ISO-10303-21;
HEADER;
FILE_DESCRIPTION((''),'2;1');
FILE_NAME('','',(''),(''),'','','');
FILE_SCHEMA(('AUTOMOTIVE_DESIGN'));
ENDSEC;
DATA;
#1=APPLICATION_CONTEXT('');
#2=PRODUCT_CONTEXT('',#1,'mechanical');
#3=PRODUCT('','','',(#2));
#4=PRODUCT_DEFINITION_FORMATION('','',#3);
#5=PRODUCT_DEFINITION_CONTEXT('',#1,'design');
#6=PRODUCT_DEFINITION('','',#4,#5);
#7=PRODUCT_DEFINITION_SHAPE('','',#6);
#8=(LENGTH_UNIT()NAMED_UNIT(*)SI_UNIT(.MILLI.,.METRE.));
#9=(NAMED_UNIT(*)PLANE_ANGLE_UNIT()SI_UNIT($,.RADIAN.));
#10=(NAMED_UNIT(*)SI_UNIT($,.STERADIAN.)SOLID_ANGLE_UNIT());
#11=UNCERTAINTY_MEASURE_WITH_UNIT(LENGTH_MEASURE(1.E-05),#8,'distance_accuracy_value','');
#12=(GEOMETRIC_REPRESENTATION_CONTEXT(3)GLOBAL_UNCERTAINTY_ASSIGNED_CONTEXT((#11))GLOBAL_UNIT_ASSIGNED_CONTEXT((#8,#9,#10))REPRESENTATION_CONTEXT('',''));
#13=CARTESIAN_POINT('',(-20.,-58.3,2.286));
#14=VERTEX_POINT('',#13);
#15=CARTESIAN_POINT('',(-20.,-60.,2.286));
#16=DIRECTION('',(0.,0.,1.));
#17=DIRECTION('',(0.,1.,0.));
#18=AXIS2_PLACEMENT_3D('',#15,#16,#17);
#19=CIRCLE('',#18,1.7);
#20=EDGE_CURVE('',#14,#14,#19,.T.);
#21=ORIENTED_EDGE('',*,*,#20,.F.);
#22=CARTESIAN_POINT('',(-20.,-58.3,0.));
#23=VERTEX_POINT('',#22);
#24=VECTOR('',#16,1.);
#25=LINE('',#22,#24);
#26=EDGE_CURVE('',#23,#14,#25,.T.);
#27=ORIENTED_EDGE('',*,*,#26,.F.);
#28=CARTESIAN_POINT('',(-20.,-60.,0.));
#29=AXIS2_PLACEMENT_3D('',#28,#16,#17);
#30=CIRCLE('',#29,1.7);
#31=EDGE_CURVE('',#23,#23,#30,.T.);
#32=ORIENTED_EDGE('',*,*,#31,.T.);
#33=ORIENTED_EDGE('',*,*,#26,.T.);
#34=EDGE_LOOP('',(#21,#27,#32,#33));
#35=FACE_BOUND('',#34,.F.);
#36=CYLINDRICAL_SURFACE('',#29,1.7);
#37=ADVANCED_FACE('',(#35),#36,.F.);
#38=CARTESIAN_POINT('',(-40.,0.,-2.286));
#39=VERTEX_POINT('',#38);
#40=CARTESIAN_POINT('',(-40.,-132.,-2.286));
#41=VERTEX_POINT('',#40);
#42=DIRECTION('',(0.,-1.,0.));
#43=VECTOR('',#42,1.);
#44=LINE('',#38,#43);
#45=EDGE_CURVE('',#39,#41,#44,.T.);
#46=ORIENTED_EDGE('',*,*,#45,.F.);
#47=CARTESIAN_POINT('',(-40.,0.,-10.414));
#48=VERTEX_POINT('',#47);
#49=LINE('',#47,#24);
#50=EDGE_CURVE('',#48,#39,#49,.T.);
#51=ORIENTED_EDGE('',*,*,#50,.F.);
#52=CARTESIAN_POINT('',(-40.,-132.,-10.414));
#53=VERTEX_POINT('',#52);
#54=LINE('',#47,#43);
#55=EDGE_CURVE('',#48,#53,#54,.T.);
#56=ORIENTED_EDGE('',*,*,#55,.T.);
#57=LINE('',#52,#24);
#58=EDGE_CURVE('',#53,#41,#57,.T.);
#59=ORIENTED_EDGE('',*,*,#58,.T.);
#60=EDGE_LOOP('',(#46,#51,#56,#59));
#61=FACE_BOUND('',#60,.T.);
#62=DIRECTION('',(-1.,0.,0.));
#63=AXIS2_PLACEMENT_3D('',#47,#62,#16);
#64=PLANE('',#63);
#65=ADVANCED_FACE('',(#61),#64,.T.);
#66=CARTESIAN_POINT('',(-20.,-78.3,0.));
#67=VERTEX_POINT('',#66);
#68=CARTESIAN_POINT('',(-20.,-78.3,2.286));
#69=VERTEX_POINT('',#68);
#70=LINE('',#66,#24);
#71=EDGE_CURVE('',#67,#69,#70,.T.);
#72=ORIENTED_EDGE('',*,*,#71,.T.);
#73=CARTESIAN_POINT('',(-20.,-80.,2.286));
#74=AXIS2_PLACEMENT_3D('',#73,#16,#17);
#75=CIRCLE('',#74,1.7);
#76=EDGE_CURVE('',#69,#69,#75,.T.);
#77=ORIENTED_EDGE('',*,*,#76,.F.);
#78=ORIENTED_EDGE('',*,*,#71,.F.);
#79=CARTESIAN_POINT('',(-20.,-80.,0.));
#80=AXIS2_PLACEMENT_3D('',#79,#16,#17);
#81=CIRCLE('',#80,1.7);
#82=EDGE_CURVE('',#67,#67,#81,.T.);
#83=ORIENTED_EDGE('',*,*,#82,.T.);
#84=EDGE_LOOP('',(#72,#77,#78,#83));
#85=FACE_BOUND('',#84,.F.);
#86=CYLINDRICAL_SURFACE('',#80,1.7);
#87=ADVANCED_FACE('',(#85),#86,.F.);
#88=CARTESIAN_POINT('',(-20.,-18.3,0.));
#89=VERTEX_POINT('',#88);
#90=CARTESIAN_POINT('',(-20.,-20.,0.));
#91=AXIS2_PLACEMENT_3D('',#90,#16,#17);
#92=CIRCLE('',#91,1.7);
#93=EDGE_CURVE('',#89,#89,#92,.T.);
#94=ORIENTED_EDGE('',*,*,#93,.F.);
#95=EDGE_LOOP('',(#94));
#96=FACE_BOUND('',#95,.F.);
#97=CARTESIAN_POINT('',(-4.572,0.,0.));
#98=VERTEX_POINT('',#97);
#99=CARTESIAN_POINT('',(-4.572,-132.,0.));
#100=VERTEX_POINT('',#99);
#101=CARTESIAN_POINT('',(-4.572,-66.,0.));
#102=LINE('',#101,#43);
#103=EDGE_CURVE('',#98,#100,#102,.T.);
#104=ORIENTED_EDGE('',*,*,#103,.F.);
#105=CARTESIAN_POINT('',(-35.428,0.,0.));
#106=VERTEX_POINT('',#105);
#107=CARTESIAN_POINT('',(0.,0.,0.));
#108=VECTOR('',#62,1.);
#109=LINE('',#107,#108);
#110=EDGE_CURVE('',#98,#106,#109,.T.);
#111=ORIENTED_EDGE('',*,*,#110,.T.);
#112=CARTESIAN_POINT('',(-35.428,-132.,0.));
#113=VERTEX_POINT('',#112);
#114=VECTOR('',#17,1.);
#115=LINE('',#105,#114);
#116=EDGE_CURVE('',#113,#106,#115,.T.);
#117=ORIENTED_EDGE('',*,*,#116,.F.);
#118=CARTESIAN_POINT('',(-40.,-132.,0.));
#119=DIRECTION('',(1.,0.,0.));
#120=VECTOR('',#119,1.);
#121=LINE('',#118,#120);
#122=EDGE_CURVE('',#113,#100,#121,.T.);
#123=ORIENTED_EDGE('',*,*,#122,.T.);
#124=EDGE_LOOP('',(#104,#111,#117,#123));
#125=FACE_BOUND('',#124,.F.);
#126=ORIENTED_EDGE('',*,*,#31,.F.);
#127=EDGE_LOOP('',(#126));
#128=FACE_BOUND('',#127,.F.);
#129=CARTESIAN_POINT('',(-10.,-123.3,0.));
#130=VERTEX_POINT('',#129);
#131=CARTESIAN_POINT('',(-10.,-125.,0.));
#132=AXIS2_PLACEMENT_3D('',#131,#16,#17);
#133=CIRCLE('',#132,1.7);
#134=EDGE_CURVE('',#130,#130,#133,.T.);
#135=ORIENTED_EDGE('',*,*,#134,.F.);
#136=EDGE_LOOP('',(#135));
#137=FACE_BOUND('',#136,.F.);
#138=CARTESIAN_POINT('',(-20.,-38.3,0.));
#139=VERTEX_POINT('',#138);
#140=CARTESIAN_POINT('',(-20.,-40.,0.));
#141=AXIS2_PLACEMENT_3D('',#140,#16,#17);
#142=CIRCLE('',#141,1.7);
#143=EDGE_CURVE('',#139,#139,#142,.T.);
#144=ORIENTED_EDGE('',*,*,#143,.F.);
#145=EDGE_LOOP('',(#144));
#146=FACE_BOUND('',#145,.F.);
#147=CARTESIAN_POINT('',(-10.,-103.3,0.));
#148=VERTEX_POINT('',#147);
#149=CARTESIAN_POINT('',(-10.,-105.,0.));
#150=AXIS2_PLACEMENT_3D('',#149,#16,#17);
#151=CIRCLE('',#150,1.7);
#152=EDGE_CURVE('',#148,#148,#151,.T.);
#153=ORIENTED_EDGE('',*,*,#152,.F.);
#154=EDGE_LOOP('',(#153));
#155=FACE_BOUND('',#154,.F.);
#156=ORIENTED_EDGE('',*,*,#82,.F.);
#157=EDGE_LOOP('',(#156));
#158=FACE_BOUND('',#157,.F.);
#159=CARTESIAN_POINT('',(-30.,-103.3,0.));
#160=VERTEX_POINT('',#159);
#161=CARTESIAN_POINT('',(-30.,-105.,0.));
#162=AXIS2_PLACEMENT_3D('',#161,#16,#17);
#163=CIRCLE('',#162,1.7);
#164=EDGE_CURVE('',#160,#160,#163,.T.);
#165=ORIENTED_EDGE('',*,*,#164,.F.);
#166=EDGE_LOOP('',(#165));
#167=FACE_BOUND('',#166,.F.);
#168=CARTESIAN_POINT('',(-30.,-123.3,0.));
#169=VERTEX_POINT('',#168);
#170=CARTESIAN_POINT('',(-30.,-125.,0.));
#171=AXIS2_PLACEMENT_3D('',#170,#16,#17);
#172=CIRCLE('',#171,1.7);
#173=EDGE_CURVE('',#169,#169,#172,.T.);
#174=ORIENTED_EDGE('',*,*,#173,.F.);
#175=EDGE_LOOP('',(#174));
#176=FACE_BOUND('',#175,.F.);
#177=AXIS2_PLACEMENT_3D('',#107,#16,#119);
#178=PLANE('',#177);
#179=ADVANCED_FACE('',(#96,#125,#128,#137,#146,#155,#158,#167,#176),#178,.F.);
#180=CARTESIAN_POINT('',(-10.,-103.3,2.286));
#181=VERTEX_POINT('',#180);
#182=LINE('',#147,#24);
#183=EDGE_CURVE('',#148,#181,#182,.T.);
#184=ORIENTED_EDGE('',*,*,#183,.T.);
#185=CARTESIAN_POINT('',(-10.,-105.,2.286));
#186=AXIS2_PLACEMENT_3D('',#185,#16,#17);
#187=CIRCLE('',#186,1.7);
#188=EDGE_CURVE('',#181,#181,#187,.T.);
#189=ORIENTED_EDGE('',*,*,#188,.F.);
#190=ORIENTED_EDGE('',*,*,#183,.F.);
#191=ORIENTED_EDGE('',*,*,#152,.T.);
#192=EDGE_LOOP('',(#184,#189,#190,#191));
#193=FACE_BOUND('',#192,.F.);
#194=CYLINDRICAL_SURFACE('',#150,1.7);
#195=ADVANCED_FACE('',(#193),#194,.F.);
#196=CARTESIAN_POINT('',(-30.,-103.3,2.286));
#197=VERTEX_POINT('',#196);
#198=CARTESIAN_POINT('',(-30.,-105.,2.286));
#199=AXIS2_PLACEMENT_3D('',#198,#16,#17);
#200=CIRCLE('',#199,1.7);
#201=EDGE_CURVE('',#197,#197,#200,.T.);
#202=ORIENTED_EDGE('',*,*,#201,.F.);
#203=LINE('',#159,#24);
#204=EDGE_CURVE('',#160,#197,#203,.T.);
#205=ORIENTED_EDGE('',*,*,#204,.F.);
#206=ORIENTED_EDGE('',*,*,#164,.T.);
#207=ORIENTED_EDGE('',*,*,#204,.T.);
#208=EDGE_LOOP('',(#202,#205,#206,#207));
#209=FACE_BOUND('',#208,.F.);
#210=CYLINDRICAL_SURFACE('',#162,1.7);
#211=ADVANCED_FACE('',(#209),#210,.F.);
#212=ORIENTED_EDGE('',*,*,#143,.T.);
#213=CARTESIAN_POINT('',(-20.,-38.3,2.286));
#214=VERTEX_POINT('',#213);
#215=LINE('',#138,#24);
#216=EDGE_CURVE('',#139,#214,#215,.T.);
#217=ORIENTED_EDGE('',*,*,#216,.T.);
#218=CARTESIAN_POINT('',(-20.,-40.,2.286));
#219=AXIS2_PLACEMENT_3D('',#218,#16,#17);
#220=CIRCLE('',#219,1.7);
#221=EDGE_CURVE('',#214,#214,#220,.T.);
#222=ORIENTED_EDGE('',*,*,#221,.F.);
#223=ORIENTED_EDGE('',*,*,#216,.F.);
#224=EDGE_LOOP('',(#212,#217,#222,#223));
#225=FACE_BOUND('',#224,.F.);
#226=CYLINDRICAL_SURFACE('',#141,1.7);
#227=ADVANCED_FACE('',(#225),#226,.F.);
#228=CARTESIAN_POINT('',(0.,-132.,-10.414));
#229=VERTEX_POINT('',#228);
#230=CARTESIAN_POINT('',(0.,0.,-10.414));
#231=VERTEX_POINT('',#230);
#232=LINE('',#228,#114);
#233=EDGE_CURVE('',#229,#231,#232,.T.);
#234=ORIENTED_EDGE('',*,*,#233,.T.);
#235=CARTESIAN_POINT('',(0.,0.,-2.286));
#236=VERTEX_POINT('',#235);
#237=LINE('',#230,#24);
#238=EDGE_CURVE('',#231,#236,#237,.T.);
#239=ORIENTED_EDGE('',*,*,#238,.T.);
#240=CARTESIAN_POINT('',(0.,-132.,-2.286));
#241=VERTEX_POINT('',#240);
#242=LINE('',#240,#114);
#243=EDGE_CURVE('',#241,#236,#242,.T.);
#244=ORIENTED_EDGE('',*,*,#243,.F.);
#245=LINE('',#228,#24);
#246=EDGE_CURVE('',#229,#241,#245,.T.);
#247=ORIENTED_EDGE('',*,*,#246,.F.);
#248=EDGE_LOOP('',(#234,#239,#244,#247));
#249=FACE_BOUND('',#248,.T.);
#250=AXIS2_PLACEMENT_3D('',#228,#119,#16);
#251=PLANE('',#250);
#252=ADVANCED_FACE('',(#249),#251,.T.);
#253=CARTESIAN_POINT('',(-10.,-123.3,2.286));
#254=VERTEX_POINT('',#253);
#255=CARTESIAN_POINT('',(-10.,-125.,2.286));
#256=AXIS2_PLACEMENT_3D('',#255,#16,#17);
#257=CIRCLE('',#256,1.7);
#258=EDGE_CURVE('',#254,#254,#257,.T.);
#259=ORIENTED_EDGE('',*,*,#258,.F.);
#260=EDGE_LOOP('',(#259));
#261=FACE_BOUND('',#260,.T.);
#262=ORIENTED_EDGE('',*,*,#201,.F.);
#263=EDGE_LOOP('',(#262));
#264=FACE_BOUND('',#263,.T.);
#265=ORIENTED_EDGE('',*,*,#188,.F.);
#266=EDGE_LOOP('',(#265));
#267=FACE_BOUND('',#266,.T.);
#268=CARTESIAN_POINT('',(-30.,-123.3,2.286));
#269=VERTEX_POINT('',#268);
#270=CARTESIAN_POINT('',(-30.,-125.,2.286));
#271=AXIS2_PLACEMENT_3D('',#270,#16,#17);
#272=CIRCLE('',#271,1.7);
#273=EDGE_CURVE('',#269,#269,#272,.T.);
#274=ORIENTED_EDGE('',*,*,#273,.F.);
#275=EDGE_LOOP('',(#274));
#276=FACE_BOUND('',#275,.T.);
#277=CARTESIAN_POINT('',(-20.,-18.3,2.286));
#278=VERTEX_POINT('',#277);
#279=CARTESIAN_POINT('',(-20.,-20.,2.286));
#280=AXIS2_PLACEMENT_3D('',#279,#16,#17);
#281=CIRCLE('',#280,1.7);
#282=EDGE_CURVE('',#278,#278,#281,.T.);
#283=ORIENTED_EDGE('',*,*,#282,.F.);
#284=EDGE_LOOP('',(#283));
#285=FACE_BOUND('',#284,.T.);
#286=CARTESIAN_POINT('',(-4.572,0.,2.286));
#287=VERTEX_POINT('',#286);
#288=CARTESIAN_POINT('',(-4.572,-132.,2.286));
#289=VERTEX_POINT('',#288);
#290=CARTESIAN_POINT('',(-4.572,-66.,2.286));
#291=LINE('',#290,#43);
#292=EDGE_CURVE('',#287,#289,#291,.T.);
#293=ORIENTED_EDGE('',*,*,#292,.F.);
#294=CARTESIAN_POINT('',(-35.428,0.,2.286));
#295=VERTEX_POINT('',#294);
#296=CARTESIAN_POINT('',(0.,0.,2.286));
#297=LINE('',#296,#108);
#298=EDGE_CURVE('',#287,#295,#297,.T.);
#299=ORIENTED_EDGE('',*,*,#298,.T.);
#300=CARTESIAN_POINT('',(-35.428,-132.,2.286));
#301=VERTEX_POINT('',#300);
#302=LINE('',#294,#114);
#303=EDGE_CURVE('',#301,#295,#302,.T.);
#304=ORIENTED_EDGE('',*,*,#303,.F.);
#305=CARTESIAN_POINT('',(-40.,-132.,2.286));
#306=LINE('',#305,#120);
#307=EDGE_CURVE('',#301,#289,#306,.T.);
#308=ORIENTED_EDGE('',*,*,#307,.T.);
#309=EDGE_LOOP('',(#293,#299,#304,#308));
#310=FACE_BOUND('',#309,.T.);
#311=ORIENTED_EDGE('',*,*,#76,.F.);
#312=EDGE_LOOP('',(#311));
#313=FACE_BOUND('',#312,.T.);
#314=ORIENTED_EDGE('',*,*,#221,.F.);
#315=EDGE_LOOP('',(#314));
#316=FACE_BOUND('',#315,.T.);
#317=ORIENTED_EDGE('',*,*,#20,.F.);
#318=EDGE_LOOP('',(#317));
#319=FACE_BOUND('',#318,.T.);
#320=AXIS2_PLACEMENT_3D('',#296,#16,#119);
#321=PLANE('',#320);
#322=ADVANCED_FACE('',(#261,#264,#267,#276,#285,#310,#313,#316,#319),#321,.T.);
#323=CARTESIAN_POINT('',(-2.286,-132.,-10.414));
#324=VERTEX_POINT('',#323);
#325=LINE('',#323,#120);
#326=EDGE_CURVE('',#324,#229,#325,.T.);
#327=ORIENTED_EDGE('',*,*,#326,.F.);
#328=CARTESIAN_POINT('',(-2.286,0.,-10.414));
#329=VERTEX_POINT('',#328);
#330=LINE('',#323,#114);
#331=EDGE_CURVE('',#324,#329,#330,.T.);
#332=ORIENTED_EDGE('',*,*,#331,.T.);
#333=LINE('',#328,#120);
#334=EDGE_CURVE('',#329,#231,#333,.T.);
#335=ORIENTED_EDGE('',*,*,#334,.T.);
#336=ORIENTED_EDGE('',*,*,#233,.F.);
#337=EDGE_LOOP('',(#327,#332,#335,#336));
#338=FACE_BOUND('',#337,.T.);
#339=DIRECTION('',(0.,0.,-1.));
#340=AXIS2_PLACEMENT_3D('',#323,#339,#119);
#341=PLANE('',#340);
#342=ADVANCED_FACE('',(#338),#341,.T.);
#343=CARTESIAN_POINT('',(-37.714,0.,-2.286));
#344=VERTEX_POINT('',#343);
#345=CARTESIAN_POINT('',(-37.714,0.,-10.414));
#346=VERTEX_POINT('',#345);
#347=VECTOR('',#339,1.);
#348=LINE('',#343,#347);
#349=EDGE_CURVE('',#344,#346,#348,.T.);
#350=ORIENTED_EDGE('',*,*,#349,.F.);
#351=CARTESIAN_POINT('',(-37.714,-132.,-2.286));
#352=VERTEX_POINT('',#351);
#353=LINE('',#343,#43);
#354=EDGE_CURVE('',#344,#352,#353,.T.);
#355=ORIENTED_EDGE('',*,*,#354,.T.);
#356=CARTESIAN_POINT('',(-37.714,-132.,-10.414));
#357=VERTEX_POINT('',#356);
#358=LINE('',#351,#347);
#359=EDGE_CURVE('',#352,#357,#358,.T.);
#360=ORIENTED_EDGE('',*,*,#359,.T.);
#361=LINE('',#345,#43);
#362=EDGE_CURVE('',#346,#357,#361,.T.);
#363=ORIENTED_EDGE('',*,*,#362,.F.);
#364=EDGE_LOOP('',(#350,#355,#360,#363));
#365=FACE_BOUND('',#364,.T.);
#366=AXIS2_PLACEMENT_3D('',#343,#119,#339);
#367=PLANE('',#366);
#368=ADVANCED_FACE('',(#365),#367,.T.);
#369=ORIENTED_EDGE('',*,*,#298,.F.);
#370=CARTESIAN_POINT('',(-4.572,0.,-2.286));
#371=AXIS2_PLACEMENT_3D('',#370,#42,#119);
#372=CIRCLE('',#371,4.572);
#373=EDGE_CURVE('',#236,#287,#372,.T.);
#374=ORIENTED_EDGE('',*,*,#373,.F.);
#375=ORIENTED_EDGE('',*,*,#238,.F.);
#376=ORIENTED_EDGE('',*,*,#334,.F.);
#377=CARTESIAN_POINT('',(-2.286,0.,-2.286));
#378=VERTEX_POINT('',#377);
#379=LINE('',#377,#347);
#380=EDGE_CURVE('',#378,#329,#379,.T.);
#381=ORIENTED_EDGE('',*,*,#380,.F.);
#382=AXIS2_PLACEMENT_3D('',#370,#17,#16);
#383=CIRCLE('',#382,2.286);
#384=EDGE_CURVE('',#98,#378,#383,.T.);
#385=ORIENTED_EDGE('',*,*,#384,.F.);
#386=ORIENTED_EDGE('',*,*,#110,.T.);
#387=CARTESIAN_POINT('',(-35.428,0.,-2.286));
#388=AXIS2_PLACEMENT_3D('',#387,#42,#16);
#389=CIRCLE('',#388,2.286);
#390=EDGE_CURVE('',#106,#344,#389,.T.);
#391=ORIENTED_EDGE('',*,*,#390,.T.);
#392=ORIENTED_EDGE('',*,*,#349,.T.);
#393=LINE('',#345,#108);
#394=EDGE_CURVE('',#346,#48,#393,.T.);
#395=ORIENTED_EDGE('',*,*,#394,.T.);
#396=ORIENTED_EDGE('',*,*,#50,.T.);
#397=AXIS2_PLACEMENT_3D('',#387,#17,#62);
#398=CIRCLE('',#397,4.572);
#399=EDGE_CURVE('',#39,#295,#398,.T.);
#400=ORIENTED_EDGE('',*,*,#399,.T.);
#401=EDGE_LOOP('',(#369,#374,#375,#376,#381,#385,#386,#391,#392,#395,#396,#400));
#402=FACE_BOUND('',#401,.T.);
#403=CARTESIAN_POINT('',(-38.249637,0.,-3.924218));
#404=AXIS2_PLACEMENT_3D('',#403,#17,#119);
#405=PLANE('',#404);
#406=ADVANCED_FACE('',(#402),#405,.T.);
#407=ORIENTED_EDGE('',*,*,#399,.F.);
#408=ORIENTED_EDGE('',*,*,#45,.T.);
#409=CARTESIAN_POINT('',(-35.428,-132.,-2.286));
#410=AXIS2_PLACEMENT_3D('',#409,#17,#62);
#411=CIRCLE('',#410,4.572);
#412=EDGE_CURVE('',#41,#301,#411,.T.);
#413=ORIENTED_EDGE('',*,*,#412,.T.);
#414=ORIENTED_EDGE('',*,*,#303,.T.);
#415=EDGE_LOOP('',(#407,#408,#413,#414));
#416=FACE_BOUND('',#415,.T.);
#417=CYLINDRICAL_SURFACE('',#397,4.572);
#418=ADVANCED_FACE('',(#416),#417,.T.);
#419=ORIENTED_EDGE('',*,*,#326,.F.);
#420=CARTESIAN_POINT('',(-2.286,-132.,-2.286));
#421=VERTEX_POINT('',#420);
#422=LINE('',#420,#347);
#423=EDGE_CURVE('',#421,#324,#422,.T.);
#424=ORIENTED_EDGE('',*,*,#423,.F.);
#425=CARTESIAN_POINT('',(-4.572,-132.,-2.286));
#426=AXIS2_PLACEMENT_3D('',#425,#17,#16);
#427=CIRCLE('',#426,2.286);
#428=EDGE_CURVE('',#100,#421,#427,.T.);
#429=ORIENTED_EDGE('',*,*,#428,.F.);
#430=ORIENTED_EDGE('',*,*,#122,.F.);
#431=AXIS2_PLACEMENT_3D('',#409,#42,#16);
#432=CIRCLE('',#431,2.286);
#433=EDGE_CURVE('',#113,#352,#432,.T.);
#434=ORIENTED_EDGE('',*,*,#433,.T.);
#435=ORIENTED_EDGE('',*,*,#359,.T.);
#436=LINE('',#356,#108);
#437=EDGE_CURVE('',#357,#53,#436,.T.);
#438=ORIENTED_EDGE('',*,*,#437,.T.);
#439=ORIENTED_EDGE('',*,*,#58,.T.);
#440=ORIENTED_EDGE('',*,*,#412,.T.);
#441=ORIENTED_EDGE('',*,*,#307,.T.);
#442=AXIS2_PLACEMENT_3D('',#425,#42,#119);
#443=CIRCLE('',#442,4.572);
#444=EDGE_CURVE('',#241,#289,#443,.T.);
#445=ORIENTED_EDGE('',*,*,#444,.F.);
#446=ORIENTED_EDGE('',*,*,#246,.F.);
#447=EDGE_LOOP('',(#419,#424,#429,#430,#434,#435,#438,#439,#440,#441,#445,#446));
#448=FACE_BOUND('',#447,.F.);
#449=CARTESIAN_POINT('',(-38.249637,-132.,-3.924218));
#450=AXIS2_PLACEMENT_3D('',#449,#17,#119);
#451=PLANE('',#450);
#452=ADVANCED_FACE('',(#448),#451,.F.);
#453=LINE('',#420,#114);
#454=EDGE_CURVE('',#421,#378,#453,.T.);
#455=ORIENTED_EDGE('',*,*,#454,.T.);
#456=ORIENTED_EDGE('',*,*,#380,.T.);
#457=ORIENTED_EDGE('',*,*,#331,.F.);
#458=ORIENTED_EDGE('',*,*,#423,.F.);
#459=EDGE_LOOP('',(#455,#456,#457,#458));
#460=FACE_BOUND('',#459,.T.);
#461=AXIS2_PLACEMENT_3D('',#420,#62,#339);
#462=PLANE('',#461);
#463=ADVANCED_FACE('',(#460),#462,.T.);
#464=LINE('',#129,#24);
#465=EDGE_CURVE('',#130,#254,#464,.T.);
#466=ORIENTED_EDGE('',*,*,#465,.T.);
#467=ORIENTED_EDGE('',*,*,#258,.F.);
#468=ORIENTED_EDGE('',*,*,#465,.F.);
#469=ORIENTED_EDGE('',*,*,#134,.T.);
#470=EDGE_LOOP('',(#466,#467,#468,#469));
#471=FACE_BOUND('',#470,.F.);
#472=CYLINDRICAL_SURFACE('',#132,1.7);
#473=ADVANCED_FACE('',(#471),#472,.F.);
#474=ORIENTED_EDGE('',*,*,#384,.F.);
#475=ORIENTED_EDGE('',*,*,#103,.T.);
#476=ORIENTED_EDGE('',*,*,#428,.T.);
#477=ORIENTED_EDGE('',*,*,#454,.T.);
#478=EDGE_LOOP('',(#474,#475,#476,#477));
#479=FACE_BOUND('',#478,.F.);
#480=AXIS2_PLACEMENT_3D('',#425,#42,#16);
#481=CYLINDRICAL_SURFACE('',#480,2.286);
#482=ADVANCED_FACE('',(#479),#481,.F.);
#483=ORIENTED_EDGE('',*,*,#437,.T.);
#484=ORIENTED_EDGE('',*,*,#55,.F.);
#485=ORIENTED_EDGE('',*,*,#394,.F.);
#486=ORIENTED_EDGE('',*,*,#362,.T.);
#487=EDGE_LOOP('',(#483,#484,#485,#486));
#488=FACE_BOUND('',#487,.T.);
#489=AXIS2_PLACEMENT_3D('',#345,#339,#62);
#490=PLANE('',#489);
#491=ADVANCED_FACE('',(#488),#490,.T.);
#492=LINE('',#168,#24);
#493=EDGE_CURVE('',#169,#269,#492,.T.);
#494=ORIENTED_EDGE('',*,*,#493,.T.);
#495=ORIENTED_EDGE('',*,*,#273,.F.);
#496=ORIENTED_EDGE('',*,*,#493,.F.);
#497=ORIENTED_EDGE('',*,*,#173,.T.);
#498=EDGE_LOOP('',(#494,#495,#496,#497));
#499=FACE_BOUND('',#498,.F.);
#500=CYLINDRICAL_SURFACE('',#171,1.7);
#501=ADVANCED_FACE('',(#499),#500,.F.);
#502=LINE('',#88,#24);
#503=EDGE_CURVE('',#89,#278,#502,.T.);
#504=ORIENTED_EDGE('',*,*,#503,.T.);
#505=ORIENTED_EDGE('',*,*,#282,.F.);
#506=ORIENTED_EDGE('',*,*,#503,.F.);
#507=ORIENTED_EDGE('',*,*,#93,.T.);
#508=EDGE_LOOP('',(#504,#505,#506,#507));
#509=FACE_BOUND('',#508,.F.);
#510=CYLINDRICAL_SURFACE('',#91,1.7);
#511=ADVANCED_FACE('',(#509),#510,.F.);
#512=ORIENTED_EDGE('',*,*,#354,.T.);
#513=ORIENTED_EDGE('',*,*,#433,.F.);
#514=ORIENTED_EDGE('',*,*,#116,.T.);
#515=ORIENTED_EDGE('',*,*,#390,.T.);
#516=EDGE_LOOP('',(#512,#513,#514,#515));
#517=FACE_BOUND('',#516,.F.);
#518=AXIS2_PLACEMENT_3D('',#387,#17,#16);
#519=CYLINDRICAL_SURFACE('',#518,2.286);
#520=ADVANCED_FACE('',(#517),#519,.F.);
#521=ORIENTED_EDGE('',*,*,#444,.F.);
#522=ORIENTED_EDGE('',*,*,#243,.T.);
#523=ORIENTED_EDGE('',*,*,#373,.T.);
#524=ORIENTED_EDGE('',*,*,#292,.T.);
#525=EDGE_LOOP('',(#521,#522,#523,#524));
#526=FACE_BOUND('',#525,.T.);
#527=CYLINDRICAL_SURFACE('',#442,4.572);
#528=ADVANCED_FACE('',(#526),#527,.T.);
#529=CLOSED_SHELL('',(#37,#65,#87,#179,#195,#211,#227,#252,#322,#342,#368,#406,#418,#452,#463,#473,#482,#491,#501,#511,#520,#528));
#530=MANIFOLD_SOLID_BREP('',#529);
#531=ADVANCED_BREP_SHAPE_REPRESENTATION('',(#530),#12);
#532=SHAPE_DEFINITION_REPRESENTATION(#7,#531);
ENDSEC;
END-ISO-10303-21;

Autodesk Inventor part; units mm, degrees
ref_plane "YZ Plane" through (0, 0, 0) normal (1, 0, 0) x (0, 1, 0)
ref_plane "XZ Plane" through (0, 0, 0) normal (0, 1, 0) x (-1, 0, 0)
ref_plane "XY Plane" through (0, 0, 0) normal (0, 0, 1) x (1, 0, 0)
sketch "Sketch1" plane through (0, 0, 0) normal (0, 0, 1) x (1, 0, 0)
  line L0 (0, 0) -> (-40, 0)
  line L1 (-40, 0) -> (-40, -132)
  line L2 (-40, -132) -> (0, -132)
  line L3 (0, -132) -> (0, 0)
  line L4 (-30, -105) -> (-10, -105) construction
  line L5 (-10, -105) -> (-10, -125) construction
  line L6 (-10, -125) -> (-30, -125) construction
  line L7 (-30, -125) -> (-30, -105) construction
  line L8 (-20, -105) -> (-20, -80) construction
  line L9 (-20, -80) -> (-20, -60) construction
  line L10 (-20, -60) -> (-20, -40) construction
  line L11 (-20, -40) -> (-20, -20) construction
  line L12 (-20, -20) -> (-20, 0) construction
  dimension "d0" = 20
  dimension "d1" = 20
  dimension "d2" = 25
  dimension "d3" = 20
  dimension "d4" = 7
  dimension "d5" = 10
extrude "Plate1" add sketch "Sketch1" along normal blind 2.286
hole "Hole1" at (-20, -80, 0) at (-20, -60, 0) at (-20, -40, 0) at (-20, -20, 0) at (-10, -125, 0) at (-10, -105, 0) at (-30, -105, 0) at (-30, -125, 0) direction (0, 0, 1) diameter 3.4 end through all clearance for "Socket Head Cap Screw" size "M3" standard "Ansi Metric M Profile"
sketch "Sketch2" plane through (-37.714, 0, 2.286) normal (-1, 0, 0) x (0, -1, 0)
  line L0 (132, 0) -> (0, 0)
  line L1 (0, 0) -> (0, -12.7)
  line L2 (0, -12.7) -> (132, -12.7)
  line L3 (132, -12.7) -> (132, 0)
edge flange "Flange1" height 12.7 angle 90 thickness 2.286 bend radius 2.286 thickness toward (-1, 0, 0) relief tear relief width 2.286 relief depth 1.143 corner gap 2.286 corner form 0 edges at (-40, -66, 0) (0, -66, 0) wall of the first edge with corners at (-37.714, -132, 2.286) (-37.714, 0, 2.286) (-37.714, 0, -10.414) (-37.714, -132, -10.414)
bend "Bend1"
corner "Corner1"
equation "\"d12\" = Thickness"
equation "\"d6\" = Thickness"
equation "\"d14\" = BendReliefWidth"
equation "\"d15\" = BendReliefDepth"
equation "\"d16\" = MinimumRemnant"
equation "\"d17\" = TransitionRadius"
equation "\"d20\" = BendRadius"
equation "\"d21\" = CornerReliefSize"
equation "\"d22\" = GapSize"
equation "\"d23\" = JacobiRadiusSize"
equation "\"BendRadius\" = Thickness"
equation "\"BendReliefWidth\" = Thickness"
equation "\"BendReliefDepth\" = 0.5 * Thickness"
equation "\"CornerReliefSize\" = 4 * Thickness"
equation "\"MinimumRemnant\" = 2 * Thickness"
equation "\"TransitionRadius\" = BendRadius"
equation "\"JacobiRadiusSize\" = BendRadius"
equation "\"GapSize\" = Thickness"
equation "\"Thickness\" = 2.286"
properties part number "Bed Mount"
